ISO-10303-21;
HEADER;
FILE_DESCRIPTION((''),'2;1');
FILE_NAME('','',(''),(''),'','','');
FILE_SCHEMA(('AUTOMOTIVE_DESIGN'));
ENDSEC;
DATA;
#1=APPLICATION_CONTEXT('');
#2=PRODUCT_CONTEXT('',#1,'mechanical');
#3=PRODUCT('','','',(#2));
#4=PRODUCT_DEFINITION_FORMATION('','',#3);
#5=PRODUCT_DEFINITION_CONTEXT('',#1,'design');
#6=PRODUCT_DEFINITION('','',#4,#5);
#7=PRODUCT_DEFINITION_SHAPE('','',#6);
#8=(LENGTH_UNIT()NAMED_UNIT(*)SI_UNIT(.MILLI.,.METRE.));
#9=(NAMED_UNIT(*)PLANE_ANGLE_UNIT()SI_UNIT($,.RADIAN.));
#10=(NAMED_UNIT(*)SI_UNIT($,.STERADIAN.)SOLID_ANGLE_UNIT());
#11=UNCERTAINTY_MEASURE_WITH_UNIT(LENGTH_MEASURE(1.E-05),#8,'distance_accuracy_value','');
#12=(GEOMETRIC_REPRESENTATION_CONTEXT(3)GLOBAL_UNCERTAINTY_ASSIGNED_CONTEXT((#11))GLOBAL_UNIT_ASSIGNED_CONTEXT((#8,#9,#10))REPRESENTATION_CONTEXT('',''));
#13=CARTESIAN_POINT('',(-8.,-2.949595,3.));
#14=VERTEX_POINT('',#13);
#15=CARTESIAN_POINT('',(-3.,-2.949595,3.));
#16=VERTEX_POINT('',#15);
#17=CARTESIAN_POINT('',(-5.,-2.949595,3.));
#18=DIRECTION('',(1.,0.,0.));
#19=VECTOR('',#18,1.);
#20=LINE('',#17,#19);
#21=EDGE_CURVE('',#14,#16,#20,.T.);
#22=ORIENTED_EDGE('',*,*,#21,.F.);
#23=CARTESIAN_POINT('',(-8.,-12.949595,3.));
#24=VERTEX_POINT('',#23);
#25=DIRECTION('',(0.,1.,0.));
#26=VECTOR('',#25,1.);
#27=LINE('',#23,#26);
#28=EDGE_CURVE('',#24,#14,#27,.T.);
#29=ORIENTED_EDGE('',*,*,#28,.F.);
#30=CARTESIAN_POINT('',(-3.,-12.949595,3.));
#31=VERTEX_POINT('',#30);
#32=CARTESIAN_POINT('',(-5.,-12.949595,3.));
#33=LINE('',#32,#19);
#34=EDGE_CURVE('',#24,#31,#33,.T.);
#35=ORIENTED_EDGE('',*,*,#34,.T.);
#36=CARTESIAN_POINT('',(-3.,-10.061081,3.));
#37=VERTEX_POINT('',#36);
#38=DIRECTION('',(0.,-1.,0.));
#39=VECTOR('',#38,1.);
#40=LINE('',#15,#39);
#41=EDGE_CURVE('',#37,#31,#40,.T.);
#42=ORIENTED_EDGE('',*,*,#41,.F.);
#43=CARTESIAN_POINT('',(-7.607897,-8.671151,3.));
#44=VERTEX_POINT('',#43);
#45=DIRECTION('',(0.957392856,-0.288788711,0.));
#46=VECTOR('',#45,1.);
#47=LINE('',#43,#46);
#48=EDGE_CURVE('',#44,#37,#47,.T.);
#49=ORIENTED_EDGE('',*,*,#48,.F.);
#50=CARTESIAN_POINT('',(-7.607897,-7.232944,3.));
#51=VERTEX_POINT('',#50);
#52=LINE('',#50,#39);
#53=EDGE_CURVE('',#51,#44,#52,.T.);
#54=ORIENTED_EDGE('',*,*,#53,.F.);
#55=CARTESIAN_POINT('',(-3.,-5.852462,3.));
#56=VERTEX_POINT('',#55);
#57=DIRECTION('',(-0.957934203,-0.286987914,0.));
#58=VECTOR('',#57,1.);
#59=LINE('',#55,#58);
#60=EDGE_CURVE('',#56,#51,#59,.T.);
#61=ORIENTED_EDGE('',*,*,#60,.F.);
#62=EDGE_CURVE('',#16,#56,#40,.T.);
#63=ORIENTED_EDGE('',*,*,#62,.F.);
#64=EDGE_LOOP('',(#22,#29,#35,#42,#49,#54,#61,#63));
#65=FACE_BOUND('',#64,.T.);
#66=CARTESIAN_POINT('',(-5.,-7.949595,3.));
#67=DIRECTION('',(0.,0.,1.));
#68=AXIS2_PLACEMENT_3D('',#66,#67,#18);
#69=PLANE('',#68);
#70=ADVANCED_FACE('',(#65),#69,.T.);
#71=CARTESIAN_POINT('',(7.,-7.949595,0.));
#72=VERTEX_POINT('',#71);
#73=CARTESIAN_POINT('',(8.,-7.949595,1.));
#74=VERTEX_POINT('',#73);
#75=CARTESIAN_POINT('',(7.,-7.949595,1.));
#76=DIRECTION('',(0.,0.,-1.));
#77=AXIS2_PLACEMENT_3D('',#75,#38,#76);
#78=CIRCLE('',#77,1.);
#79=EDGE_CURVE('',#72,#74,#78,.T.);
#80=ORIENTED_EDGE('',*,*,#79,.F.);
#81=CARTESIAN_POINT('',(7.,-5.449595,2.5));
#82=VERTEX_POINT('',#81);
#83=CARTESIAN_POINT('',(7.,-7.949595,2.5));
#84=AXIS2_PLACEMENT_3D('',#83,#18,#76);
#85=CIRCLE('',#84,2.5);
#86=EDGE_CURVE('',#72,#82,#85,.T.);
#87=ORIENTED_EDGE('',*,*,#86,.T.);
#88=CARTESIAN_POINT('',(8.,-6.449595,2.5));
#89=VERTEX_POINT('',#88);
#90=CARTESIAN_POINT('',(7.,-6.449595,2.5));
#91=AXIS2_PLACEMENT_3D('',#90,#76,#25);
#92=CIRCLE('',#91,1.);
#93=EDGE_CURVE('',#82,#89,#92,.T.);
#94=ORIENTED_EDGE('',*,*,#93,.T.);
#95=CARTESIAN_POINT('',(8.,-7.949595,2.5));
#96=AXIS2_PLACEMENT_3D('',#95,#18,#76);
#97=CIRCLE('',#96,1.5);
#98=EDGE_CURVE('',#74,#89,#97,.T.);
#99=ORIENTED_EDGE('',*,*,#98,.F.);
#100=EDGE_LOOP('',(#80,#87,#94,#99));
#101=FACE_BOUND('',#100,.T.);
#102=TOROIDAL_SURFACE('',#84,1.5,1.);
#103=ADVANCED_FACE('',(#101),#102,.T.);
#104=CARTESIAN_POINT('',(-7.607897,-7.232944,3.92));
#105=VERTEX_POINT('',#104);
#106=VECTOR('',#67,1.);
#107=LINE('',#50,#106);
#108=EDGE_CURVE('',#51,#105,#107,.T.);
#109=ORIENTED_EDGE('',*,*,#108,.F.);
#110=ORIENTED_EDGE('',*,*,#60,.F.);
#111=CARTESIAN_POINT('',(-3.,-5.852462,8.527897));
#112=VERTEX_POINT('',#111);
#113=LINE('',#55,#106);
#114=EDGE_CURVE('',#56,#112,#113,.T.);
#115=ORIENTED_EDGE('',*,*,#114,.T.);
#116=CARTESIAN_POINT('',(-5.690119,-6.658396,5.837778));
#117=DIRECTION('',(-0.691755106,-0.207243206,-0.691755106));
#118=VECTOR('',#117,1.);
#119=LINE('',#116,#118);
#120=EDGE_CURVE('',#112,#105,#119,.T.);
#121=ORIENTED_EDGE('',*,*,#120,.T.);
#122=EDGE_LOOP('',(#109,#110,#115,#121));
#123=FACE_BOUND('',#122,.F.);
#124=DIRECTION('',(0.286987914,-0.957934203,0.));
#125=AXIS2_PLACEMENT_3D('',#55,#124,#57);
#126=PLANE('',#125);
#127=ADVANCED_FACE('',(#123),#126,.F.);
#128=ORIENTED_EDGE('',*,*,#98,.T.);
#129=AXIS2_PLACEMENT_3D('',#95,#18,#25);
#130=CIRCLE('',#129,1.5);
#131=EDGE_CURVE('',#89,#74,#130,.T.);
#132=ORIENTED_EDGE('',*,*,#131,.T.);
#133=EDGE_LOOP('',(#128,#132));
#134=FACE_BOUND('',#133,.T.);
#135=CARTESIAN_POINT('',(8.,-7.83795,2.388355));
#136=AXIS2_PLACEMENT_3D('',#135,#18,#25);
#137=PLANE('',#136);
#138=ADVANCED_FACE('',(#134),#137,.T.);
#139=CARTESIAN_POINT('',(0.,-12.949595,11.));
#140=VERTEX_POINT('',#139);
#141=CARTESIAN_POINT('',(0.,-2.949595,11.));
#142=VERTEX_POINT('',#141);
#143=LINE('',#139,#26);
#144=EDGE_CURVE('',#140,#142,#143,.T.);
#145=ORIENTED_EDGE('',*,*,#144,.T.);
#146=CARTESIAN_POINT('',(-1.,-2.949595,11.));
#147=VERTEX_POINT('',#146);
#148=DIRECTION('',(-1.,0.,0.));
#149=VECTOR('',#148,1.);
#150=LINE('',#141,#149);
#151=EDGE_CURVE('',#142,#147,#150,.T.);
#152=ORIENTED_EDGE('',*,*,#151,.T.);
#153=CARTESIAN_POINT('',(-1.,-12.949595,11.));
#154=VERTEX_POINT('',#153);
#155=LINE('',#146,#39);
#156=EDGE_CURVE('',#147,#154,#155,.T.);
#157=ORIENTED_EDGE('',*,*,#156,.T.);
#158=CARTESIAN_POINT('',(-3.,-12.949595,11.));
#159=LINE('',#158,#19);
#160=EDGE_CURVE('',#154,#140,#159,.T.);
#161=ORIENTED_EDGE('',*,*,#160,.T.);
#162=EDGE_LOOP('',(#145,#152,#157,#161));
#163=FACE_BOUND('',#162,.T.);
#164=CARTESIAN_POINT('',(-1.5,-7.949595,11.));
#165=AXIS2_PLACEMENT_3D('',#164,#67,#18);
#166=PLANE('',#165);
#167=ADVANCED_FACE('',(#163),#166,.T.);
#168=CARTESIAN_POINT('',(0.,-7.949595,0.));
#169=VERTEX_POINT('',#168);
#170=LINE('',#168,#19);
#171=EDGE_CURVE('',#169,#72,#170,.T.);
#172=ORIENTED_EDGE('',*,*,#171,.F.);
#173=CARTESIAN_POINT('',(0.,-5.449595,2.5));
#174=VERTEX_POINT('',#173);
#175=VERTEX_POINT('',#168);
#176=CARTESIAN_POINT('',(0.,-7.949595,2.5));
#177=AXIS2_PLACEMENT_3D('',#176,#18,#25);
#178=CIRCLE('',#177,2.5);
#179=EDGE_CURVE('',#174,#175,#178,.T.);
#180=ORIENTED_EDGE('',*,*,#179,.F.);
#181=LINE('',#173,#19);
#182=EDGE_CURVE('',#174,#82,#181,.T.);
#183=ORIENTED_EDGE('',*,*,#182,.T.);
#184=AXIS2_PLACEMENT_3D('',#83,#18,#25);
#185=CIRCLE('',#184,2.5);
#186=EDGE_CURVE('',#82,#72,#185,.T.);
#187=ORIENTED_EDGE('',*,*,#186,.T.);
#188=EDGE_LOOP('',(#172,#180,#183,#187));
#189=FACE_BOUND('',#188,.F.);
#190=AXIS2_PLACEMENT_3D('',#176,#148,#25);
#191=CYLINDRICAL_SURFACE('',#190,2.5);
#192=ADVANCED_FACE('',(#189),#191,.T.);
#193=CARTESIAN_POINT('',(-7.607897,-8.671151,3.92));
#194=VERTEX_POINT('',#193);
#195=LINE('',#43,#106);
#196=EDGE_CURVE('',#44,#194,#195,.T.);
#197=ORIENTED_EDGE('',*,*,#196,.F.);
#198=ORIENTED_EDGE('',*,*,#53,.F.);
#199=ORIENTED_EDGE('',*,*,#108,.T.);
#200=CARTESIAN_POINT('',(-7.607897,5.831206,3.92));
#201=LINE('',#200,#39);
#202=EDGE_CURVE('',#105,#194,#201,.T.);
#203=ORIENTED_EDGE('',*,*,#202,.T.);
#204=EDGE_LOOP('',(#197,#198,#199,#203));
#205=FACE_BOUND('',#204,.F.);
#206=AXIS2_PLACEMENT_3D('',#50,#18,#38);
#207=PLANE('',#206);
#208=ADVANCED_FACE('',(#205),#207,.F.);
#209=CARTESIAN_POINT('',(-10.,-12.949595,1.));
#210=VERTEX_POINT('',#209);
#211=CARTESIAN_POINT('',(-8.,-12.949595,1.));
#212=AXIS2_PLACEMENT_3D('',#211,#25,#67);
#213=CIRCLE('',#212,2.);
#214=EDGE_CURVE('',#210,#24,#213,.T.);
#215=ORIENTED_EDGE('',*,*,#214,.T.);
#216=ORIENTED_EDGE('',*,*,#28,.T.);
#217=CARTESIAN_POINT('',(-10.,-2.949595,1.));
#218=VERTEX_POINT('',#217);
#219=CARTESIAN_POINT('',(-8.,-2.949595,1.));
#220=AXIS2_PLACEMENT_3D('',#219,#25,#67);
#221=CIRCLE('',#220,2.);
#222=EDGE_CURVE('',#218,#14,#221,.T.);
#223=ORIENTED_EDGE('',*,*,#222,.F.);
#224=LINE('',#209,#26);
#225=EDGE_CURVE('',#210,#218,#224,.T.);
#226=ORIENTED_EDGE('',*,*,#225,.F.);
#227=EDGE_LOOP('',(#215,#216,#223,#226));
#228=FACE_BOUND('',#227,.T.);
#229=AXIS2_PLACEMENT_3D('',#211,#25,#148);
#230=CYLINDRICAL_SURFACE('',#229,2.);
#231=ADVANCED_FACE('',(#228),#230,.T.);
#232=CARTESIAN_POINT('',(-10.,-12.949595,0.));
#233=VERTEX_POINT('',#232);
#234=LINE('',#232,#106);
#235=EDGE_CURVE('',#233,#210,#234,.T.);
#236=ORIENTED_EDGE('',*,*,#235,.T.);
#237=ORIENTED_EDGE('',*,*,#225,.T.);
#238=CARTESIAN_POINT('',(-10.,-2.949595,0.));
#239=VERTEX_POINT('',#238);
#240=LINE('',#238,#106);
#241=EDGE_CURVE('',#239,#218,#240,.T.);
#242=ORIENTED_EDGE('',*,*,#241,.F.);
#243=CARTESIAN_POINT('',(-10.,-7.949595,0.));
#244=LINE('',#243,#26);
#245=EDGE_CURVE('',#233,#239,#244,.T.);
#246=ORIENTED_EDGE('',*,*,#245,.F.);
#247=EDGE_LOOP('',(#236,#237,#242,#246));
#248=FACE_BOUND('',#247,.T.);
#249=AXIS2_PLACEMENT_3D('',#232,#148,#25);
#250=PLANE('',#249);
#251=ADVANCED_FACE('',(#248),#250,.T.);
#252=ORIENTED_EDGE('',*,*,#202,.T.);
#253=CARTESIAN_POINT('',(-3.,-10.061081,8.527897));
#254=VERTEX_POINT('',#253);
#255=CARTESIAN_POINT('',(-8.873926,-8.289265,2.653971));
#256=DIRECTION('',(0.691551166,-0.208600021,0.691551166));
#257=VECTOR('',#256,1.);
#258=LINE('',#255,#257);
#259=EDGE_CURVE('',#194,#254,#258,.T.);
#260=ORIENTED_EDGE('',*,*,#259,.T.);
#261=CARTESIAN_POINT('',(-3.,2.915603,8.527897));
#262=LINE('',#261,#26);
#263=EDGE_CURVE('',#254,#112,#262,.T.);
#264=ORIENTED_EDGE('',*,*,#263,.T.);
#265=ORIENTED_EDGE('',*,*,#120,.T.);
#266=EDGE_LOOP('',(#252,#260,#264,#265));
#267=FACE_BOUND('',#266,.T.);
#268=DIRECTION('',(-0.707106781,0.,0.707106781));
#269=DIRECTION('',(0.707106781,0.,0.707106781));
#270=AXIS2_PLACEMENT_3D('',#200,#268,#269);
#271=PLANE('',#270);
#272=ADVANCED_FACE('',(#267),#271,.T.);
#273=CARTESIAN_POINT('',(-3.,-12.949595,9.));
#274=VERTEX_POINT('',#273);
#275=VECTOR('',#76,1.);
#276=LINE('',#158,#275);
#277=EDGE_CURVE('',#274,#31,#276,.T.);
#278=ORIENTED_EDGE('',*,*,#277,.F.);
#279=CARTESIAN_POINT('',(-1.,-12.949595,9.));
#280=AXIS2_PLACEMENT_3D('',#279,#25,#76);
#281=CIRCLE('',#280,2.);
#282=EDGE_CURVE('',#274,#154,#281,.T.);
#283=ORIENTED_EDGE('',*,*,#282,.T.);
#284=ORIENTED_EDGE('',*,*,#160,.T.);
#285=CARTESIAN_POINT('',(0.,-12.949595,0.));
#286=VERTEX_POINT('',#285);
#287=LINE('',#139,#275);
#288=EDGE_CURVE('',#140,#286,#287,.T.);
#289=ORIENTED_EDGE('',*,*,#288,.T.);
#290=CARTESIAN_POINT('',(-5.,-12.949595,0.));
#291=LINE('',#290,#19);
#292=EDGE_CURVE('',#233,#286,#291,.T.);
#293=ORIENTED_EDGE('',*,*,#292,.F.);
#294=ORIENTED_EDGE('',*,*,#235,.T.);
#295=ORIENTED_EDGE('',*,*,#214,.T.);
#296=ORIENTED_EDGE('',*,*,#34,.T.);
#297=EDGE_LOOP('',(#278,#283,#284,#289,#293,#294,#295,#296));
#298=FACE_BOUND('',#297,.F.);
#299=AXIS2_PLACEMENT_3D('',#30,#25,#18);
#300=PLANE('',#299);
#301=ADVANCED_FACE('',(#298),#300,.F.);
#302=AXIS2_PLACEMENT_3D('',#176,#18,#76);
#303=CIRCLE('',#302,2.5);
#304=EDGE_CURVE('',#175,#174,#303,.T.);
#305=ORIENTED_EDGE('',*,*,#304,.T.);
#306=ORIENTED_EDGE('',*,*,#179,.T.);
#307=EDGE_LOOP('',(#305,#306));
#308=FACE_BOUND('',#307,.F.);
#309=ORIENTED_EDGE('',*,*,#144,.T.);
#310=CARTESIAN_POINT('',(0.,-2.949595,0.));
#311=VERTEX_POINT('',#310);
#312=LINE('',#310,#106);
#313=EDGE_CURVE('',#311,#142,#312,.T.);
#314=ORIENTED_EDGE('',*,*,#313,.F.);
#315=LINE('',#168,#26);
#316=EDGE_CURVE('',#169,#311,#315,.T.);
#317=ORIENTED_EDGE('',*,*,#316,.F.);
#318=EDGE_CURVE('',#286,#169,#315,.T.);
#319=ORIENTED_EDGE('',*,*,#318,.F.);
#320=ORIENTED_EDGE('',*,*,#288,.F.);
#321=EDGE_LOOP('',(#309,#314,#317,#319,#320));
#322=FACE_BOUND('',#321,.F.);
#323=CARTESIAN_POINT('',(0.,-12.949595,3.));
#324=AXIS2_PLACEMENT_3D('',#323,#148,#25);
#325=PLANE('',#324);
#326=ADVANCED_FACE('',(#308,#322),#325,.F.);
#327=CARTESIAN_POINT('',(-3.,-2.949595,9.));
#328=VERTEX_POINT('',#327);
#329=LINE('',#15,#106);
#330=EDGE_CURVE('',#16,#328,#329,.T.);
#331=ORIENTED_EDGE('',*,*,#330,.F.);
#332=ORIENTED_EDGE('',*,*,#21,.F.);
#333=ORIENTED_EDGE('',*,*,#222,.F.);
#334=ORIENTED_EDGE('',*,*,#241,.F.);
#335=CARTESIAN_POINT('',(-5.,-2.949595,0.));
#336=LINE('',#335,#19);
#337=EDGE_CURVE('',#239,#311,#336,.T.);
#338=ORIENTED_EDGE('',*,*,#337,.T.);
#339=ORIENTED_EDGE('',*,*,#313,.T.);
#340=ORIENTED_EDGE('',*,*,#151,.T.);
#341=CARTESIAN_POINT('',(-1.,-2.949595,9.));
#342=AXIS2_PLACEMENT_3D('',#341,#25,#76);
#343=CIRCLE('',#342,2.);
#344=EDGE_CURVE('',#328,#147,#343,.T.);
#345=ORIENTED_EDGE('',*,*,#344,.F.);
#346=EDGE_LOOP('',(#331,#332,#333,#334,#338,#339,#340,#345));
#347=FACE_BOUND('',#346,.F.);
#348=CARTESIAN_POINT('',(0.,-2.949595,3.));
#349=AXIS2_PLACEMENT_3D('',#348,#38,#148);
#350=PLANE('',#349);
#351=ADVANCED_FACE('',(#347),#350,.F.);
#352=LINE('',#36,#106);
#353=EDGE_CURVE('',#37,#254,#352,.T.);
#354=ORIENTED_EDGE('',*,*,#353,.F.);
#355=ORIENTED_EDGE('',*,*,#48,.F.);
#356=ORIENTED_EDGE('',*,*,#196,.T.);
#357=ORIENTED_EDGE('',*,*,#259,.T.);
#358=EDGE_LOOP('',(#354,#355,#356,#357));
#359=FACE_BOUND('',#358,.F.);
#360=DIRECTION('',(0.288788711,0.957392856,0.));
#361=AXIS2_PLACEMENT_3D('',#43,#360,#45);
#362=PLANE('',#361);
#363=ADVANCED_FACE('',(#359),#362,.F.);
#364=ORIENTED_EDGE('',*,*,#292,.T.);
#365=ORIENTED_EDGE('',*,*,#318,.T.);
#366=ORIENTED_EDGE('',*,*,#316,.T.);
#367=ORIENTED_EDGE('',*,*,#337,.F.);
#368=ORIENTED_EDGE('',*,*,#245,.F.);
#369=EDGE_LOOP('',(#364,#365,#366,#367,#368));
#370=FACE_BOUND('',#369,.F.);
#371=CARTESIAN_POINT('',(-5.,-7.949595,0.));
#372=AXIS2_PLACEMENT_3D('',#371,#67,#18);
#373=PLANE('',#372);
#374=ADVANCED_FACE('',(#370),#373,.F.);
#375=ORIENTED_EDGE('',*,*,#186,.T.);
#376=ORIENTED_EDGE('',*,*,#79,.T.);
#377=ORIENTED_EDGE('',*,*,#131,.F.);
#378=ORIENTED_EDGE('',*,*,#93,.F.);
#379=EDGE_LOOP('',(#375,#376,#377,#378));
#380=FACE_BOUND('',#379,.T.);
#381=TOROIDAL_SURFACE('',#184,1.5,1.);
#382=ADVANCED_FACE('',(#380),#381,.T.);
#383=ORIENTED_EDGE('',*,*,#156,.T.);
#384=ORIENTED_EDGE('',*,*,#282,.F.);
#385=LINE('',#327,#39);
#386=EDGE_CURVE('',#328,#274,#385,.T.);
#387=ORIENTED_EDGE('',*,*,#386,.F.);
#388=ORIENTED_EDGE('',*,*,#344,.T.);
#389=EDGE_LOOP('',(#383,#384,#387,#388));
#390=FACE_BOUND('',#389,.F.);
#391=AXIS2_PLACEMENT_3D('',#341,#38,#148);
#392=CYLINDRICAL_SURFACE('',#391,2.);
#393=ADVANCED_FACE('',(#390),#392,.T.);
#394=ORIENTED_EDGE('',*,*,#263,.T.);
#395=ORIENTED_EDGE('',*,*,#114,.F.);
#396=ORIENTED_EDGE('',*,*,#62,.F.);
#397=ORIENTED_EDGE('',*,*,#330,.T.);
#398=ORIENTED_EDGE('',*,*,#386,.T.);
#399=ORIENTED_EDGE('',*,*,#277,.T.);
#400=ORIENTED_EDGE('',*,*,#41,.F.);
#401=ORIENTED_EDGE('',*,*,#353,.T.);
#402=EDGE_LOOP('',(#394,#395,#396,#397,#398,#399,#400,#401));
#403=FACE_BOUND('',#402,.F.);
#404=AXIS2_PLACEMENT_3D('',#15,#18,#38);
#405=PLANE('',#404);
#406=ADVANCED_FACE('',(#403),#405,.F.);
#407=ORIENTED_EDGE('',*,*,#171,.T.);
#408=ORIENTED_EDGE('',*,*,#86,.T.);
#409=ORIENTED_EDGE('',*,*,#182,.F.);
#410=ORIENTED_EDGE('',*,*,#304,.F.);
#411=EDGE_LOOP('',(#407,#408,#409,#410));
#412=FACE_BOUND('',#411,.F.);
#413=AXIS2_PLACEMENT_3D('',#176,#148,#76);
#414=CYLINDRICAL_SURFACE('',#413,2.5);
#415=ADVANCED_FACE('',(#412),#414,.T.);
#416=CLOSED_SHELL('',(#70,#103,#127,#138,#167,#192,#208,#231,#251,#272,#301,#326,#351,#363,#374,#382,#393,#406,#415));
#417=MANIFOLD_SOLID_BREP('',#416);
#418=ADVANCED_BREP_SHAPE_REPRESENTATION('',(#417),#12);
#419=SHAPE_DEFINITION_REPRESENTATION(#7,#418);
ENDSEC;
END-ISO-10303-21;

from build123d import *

# Parameters (mm, degrees)
F0_W        = 10
F0_H        = 10
F1_DEPTH    = 3
F3_DEPTH    = 8
F4_DEPTH    = 6
F5_T4_DEPTH = 27.5665061863
F6_R        = 2
F8_DEPTH    = 8
F9_R        = 1


# Not quite as in the source:
# - a fillet or chamfer that OpenCascade refuses, or shapes differently, is made with other operations: its cross-section is extruded or revolved along the edge and cut away or added


with BuildPart() as f1:
    # F0 (on Top) → F1 (new body)
    with BuildSketch(Plane.XY):
        with Locations((-5, -7.9495952278)):
            Rectangle(F0_W, F0_H)
    extrude(amount=F1_DEPTH)

    # F2 (on face) → F3 (join)
    with BuildSketch(Plane.XY.offset(3)):
        Polygon((0, -12.9495952278), (0, -2.9495952278), (-3, -2.9495952278), (-3, -5.8524622582), (-3, -7.9495952278), (-3, -10.0610805675), (-3, -12.9495952278), align=None)
    extrude(amount=F3_DEPTH)

    # F2 (on face) → F4 (join)
    with BuildSketch(Plane.XY.offset(3)):
        Polygon((-3, -7.9495952278), (-3, -5.8524622582), (-7.6078968298, -7.2329440242), (-7.6078968298, -8.6711510528), (-3, -10.0610805675), align=None)
    extrude(amount=F4_DEPTH)

    # F5: chamfer of 5.08 on 1 edges, made by hand


with BuildPart() as f5_tool2:
    # F5_s3 → F5_t4 (new body)
    with BuildSketch(Plane.XZ.offset(-5.8312055546)):
        Polygon((-7.6078968298, 3.92), (-2.5278968298, 9), (-7.6078968298, 9), align=None)
    extrude(amount=F5_T4_DEPTH)

    split(bisect_by=Plane.YZ.offset(-3), keep=Keep.BOTTOM)


with BuildPart() as f1_1:
    add(f1.part)

    # F5_t1: cut F5_tool2
    add(f5_tool2.part, mode=Mode.SUBTRACT)

    # F6
    f6_edges = [f1_1.edges().sort_by_distance(p)[0] for p in [
        (-10, -7.949595, 3),
        (-3, -7.949595, 11),
    ]]
    fillet(f6_edges, radius=F6_R)

    # F7 (on face) → F8 (join)
    with BuildSketch(Plane.YZ):
        with BuildLine():
            ThreePointArc((-7.9495952278, 0), (-6.1818282749, 0.732233047), (-5.4495952278, 2.5))
            ThreePointArc((-5.4495952278, 2.5), (-9.7173621808, 4.267766953), (-7.9495952278, 0))
        make_face()
    extrude(amount=F8_DEPTH)

    # F9
    f9_edges = [f1_1.edges().sort_by_distance(p)[0] for p in [
        (8, -7.949595, 5),
    ]]
    fillet(f9_edges, radius=F9_R)


solid = f1_1.part
